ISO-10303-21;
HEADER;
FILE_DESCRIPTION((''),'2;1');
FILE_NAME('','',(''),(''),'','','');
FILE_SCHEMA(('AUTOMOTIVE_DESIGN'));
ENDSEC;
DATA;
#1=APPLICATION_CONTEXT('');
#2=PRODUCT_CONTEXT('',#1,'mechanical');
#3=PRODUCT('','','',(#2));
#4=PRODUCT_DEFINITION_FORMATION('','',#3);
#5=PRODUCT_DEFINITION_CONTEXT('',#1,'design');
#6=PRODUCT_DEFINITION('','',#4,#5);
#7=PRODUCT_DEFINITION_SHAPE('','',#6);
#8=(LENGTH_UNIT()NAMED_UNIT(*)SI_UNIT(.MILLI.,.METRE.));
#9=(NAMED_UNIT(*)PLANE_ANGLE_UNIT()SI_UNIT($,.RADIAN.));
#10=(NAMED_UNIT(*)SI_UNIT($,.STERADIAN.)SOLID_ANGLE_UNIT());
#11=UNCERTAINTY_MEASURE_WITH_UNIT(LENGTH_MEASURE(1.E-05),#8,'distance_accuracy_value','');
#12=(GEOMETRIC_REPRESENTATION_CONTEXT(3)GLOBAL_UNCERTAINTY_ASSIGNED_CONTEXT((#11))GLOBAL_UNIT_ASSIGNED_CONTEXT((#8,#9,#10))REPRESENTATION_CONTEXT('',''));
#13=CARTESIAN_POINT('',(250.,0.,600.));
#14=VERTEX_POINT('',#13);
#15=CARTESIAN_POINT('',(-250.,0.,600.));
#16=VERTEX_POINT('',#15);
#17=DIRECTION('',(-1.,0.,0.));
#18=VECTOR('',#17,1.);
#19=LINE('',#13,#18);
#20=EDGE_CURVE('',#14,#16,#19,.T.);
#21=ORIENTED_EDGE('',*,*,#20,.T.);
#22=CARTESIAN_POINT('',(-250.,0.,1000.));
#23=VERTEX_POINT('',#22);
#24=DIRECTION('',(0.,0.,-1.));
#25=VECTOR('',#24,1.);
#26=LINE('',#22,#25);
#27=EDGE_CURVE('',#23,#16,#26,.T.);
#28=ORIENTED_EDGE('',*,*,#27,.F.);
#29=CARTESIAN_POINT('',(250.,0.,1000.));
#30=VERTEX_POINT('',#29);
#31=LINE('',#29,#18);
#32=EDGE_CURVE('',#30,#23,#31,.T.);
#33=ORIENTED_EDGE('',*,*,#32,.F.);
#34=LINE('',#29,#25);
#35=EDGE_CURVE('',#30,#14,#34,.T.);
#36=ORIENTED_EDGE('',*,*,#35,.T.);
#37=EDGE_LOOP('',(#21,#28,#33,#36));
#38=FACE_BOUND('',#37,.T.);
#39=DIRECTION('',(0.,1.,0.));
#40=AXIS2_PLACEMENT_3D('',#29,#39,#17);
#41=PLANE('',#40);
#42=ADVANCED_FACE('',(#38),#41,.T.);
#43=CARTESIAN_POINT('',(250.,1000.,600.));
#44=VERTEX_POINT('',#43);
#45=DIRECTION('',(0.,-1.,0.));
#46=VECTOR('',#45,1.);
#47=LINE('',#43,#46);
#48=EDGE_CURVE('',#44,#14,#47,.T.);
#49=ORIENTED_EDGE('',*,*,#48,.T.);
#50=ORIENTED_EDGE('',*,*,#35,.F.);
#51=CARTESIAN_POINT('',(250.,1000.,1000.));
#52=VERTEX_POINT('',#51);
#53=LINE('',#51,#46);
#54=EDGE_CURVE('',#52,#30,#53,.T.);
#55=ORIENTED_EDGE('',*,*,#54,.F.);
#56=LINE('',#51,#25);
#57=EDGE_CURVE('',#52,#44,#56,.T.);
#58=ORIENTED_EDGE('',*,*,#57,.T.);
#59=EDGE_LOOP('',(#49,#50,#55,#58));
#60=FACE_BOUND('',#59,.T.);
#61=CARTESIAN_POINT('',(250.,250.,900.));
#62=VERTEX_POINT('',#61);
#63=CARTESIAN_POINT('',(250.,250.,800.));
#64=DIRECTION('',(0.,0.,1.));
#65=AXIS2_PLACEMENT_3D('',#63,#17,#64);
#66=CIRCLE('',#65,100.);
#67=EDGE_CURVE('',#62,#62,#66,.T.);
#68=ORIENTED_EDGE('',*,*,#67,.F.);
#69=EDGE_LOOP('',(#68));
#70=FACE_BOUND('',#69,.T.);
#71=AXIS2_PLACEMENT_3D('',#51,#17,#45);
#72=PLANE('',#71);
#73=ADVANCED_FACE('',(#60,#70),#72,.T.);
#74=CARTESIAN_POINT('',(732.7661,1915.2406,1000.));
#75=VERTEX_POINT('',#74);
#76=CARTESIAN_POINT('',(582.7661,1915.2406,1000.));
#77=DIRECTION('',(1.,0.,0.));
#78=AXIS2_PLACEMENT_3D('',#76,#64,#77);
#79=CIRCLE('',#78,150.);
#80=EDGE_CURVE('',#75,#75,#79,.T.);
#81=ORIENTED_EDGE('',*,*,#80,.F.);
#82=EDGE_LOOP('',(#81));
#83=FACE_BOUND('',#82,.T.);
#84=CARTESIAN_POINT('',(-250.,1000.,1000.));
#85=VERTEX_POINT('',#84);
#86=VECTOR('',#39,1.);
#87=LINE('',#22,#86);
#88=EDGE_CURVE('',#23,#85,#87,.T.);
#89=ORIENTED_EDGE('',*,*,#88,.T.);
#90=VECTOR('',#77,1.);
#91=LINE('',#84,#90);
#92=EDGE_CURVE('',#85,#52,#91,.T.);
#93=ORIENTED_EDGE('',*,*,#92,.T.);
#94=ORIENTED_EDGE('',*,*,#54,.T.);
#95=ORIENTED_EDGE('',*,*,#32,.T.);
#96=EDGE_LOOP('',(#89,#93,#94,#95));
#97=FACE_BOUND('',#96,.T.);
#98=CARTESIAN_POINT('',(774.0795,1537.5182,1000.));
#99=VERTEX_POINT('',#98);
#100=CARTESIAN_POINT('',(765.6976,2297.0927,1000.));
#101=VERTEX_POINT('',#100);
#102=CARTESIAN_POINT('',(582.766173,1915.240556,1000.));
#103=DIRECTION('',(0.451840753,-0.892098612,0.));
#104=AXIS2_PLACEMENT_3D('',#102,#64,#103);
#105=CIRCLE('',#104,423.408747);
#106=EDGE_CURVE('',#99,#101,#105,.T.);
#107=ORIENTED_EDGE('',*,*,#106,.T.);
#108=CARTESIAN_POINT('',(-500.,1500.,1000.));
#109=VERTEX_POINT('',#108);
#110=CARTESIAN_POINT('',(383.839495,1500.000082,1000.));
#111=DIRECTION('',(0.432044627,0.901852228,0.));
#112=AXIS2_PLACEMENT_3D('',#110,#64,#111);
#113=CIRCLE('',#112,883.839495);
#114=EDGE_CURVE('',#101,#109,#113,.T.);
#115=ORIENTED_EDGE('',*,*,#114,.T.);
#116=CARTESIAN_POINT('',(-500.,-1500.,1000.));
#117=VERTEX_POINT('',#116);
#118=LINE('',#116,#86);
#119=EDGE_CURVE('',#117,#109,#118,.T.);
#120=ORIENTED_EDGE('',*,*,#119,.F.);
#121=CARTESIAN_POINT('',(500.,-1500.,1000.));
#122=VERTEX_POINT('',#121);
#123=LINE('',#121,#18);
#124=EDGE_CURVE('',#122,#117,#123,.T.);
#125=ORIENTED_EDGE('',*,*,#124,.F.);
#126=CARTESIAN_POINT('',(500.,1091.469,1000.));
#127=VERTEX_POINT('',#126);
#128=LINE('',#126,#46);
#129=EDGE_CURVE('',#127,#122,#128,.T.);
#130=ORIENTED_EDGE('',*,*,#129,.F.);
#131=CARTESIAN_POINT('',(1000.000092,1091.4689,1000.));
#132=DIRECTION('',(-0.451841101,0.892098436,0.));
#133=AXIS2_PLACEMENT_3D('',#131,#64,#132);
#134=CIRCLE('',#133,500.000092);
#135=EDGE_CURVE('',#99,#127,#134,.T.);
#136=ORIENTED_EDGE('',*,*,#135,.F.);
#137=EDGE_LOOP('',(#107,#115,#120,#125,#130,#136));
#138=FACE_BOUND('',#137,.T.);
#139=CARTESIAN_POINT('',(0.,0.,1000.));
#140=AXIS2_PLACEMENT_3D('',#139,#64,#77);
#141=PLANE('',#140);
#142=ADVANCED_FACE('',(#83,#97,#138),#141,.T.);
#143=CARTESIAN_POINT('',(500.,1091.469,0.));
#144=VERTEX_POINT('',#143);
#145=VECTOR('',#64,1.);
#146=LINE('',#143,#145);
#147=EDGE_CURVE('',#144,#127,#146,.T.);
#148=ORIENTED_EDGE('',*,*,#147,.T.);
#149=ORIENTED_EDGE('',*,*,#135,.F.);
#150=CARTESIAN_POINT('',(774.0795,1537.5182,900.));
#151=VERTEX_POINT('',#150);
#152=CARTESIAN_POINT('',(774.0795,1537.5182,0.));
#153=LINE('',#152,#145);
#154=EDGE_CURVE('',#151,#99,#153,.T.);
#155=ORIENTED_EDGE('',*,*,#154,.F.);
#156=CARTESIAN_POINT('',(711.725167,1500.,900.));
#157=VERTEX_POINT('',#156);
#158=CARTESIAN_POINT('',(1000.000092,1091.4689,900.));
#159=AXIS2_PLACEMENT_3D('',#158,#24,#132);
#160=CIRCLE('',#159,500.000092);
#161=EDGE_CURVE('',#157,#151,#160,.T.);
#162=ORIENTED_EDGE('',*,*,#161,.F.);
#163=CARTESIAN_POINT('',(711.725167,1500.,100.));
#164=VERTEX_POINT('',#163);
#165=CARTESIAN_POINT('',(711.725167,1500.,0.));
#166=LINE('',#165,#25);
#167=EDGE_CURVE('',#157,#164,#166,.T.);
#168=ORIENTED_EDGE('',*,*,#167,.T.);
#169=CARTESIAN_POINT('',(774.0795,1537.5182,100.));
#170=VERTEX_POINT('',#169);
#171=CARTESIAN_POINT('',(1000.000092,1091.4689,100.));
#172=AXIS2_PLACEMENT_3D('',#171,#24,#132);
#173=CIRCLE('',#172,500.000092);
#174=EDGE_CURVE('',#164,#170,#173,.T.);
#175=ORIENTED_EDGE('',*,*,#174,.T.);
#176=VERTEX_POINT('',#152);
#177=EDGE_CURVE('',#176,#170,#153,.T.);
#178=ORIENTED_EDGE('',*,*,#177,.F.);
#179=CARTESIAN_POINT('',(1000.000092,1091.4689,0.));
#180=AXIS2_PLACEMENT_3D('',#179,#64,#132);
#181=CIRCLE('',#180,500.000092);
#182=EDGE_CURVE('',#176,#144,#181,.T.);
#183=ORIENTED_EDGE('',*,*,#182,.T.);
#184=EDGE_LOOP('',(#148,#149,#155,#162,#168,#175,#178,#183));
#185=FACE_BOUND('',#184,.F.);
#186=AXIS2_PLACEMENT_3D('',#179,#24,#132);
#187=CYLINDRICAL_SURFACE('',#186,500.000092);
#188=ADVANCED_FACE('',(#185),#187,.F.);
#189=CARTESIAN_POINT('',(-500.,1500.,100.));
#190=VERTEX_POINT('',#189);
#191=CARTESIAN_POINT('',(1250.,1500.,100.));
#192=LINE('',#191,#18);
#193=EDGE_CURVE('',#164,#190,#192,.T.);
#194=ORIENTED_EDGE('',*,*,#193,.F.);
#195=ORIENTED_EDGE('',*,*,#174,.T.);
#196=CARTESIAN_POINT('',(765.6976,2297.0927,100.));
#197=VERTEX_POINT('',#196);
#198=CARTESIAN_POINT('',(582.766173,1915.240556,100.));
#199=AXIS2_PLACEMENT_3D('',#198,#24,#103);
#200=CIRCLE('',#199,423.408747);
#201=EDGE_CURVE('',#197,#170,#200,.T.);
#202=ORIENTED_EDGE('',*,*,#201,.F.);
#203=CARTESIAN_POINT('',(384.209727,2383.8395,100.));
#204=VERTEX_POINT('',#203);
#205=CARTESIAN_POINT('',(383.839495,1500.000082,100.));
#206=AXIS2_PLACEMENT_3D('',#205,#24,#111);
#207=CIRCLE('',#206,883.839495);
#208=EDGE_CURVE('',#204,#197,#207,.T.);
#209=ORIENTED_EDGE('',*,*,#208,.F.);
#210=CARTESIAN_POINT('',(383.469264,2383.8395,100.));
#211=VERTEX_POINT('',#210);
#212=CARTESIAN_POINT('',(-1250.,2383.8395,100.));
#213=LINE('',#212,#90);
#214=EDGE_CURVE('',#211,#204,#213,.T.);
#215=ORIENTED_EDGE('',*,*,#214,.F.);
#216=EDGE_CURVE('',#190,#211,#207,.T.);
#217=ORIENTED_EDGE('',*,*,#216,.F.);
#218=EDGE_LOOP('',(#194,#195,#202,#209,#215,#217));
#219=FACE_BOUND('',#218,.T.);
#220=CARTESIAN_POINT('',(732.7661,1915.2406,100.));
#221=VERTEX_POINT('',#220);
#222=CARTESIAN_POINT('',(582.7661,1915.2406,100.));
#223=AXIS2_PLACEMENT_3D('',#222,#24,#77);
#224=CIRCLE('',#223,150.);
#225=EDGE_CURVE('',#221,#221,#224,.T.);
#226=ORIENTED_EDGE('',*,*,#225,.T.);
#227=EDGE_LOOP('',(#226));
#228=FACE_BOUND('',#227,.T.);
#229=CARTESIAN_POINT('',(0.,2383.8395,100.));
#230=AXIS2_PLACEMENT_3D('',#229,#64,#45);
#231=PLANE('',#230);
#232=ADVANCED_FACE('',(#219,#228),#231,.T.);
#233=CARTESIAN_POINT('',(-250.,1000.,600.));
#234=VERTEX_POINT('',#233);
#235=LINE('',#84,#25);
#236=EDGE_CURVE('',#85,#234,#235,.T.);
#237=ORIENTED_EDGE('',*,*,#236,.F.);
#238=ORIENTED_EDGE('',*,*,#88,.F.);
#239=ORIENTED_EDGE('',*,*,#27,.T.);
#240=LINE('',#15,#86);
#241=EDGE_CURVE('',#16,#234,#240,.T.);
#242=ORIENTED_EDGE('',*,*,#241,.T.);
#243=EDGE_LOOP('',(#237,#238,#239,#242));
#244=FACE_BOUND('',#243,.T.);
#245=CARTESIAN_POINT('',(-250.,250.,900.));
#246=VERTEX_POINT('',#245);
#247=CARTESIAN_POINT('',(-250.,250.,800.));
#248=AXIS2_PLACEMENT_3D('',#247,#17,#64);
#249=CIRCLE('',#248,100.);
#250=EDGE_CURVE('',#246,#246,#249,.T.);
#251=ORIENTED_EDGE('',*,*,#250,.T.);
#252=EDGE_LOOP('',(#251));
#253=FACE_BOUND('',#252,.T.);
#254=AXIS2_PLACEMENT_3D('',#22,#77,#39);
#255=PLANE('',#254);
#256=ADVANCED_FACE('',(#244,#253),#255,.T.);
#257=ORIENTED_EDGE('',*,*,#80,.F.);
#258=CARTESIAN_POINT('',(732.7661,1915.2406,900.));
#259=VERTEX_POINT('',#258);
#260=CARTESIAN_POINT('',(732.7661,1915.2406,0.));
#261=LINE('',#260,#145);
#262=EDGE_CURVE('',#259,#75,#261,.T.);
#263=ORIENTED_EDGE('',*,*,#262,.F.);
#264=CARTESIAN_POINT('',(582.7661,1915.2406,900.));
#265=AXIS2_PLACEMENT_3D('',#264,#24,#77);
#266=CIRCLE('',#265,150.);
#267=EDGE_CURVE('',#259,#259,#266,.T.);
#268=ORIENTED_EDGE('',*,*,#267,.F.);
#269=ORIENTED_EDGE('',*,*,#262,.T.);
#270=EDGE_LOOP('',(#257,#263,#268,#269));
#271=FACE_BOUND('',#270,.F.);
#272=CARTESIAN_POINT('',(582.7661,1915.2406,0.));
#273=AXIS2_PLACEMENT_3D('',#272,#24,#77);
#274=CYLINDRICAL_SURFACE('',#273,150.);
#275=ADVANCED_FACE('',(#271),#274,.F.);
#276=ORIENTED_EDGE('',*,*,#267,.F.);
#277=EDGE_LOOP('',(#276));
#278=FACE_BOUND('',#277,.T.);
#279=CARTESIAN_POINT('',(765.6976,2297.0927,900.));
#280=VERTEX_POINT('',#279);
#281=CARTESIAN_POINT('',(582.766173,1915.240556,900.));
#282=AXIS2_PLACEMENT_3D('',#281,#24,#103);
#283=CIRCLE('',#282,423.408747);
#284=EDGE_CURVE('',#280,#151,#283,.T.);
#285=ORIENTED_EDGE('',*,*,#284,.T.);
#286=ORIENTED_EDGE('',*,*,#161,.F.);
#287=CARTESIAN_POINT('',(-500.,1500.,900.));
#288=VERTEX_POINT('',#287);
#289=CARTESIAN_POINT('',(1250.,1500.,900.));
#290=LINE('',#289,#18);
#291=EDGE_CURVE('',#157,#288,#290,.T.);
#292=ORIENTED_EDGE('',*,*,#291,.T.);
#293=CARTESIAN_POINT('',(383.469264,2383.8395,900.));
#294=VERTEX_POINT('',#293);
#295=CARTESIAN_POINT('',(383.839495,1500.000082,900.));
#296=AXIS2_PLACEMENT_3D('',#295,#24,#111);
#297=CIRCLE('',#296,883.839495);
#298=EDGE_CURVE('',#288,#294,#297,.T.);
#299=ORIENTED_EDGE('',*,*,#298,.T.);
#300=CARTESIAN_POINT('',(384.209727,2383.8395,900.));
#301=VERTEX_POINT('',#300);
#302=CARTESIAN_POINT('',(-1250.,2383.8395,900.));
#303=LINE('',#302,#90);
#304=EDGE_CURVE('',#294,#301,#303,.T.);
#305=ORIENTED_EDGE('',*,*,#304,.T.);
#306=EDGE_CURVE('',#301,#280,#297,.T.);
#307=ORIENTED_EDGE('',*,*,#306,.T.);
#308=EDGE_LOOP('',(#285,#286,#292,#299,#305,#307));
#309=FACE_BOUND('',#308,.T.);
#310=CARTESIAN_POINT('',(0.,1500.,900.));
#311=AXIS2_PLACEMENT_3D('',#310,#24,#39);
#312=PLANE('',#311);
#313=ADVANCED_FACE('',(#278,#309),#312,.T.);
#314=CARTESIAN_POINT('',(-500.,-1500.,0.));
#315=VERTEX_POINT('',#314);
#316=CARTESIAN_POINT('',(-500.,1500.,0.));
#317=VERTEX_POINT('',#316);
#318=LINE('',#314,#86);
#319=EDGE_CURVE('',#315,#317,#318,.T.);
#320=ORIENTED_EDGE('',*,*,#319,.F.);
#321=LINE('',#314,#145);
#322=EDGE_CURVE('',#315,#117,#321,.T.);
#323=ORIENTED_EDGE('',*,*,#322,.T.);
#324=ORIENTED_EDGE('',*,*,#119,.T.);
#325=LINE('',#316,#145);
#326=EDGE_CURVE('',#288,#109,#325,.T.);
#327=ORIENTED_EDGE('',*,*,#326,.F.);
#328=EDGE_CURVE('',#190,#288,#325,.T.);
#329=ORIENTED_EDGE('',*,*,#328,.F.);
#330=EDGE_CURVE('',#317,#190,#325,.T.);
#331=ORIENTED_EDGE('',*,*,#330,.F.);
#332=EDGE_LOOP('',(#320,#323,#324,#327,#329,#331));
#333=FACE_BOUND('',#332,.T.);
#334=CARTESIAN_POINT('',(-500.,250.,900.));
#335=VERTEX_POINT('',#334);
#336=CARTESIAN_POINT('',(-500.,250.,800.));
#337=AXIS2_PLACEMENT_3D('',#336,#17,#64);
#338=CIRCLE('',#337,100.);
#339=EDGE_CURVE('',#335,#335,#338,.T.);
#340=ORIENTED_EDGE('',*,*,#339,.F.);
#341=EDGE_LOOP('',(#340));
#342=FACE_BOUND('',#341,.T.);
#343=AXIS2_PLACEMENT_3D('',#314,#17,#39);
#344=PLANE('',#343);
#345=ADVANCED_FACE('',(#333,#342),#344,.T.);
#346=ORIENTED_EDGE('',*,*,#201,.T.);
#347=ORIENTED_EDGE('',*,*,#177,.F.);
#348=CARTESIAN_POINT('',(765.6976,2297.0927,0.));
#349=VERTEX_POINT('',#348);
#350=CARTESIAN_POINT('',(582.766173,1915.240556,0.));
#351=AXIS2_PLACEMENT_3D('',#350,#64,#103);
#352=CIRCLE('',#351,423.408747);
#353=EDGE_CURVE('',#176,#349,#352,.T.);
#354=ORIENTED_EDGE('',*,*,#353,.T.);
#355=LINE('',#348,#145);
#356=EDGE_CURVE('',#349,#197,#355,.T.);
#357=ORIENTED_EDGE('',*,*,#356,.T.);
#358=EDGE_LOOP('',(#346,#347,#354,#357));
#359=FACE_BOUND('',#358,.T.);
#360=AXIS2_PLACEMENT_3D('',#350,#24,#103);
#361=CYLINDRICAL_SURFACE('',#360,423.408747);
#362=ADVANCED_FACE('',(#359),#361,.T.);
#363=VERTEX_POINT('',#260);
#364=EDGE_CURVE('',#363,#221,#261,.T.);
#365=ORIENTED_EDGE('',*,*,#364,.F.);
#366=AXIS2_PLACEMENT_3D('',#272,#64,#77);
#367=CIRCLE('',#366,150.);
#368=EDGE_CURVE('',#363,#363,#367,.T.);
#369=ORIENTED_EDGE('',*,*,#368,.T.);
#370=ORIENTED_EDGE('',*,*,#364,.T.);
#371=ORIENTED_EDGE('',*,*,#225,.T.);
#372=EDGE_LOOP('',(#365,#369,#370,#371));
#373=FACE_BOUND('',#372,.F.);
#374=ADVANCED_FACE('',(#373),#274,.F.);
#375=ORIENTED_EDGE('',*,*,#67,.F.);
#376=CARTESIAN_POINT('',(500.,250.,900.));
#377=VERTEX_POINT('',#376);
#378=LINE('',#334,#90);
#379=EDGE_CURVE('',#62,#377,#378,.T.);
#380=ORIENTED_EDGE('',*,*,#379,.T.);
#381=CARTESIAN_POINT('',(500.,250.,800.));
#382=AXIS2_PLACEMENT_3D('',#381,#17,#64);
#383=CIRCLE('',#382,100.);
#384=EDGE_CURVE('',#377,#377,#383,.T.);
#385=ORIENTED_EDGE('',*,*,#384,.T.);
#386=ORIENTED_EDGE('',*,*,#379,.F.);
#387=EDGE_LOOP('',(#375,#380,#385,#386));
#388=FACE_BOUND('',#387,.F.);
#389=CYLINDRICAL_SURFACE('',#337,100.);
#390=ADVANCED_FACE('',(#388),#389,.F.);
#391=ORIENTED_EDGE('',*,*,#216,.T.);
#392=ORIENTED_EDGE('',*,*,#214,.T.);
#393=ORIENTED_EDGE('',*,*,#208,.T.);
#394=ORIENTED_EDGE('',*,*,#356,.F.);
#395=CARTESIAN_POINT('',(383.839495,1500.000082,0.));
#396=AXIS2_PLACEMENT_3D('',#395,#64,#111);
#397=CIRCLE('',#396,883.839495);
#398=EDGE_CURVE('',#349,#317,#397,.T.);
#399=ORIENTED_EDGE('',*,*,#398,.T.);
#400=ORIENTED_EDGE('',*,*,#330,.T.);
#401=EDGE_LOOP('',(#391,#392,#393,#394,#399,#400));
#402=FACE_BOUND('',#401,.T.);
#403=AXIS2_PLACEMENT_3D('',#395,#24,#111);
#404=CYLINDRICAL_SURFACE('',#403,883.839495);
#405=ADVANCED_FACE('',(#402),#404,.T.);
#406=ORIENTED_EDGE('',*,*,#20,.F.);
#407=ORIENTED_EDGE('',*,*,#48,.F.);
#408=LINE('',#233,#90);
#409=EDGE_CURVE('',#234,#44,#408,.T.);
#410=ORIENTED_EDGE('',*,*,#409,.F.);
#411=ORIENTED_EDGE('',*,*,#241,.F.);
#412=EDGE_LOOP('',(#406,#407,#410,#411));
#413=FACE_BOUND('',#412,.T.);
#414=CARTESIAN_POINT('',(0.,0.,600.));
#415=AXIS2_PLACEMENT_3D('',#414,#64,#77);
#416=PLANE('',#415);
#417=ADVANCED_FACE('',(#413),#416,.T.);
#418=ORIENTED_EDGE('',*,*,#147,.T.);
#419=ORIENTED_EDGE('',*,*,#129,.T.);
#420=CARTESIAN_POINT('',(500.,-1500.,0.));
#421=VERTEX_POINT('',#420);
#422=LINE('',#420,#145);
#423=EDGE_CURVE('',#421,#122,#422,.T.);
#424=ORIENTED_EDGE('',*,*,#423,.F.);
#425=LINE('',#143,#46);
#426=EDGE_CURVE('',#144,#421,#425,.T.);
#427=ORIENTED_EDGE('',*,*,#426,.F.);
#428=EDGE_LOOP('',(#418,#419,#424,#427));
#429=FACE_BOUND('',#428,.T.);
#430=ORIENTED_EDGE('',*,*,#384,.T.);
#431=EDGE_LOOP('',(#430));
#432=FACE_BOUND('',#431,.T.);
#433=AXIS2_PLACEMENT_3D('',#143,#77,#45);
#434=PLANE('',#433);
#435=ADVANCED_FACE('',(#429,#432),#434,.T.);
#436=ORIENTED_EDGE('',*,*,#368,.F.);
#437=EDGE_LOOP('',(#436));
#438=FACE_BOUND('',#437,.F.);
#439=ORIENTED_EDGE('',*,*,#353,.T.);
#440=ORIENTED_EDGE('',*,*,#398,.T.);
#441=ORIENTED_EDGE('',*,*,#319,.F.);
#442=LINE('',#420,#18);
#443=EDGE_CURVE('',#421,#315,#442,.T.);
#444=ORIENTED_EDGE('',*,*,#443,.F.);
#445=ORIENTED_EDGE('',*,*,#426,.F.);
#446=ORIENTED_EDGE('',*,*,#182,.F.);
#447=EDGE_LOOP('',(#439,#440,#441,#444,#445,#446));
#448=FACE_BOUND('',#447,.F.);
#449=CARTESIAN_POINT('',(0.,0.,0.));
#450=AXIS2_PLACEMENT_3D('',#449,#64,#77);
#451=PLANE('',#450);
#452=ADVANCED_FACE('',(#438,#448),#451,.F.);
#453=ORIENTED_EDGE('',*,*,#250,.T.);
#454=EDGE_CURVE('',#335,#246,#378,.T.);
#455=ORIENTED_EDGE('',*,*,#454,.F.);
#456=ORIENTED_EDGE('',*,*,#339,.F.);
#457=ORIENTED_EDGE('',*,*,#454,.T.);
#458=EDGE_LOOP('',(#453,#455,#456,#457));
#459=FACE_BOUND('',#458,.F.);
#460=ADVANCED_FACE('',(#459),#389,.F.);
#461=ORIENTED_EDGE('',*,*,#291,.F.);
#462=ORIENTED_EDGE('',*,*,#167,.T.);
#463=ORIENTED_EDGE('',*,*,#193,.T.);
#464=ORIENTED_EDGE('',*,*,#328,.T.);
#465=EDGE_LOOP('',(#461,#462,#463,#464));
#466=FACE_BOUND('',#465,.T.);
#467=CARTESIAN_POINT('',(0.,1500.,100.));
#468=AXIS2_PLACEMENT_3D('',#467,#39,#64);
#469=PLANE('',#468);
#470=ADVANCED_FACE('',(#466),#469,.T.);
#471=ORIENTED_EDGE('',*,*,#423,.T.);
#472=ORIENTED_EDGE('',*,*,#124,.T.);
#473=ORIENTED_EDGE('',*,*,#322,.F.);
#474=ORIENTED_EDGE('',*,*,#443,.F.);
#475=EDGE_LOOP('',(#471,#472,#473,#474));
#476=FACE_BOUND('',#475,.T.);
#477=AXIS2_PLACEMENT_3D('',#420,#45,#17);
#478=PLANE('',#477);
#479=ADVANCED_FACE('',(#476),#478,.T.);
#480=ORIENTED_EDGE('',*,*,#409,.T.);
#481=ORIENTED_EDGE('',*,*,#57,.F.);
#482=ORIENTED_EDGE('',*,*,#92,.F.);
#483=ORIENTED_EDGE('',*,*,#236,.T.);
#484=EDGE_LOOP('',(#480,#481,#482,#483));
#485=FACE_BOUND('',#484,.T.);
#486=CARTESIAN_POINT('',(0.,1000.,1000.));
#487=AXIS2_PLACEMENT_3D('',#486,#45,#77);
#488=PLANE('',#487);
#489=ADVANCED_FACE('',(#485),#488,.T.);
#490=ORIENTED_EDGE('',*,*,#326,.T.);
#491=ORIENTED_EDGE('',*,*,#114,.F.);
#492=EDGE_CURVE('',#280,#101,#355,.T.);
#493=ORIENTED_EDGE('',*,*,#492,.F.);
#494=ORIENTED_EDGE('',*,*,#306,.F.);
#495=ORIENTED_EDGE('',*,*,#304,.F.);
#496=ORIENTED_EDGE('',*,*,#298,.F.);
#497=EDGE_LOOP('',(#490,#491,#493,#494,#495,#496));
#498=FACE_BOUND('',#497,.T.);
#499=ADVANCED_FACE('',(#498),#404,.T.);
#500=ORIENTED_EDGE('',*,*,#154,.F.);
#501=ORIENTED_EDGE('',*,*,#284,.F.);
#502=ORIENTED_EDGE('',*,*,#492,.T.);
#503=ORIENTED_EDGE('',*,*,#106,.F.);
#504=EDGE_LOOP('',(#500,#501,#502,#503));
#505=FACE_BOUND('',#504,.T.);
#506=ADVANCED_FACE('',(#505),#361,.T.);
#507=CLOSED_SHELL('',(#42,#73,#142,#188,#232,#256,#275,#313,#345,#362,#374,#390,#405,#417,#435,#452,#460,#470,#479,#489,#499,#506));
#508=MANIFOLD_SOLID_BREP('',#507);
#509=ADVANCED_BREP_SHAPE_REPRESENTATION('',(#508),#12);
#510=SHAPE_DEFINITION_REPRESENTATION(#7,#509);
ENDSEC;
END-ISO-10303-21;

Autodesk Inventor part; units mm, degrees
ref_plane "YZ Plane" through (0, 0, 0) normal (1, 0, 0) x (0, 1, 0)
ref_plane "XZ Plane" through (0, 0, 0) normal (0, 1, 0) x (-1, 0, 0)
sketch "Skizze1" plane through (0, 0, 0) normal (0, 0, 1) x (1, 0, 0)
  line L0 (-1066.0722, 0) -> (1356.4088, 0) construction
  line L1 (0, -2329.2869) -> (0, 3475.7215) construction
  line L2 (500, 1091.469) -> (500, -1500)
  line L3 (500, -1500) -> (-500, -1500)
  line L4 (-500, -1500) -> (-500, 1500)
  line L5 (-500, 1500) -> (500, -1500) construction
  line L6 (500, 1500) -> (-500, -1500) construction
  arc A0 (765.6976, 2297.0927) -> (-500, 1500) centre (383.8395, 1500) ccw
  arc A1 (774.0795, 1537.5182) -> (765.6976, 2297.0927) centre (582.7661, 1915.2406) ccw
  circle A2 centre (582.7661, 1915.2406) radius 150
  arc A3 (774.0795, 1537.5182) -> (500, 1091.469) centre (1000, 1091.469) ccw
  point P0 (0, 0)
  dimension "d0" = 1000
  dimension "d1" = 3000
  dimension "d2" = 423.4087
  dimension "d3" = 300
  dimension "d5" = 500
extrude "Extrusion1" add sketch "Skizze1" along normal blind 1000
ref_plane "Arbeitsebene1" through (0, -1500, 0) normal (-1, 0, 0) x (0, 0, 1)
sketch "Skizze2" plane through (0, -1500, 0) normal (-1, 0, 0) x (0, 0, 1)
  line L0 (0, 3000) -> (1000, 3000) projected
  line L1 (100, 3000) -> (908.6027, 3000)
  line L2 (0, 3883.8395) -> (1000, 3883.8395) construction
  line L3 (100, 3000) -> (900, 3000)
  line L4 (900, 3000) -> (900, 3883.8395)
  line L5 (900, 3883.8395) -> (100, 3883.8395)
  line L6 (100, 3883.8395) -> (100, 3000)
  line L7 (1000, 3000) -> (1000, 3883.8395) construction
  point P0 (0, 1500)
  point P1 (1000, 3797.0927)
  dimension "d8" = 800
  dimension "d9" = 100
extrude "Extrusion2" cut sketch "Skizze2" along normal mid plane 2500
sketch "Skizze3" plane through (0, 0, 1000) normal (0, 0, 1) x (1, 0, 0)
  point P0 (0, 0)
sketch "Skizze4" plane through (0, 0, 1000) normal (0, 0, 1) x (1, 0, 0)
  point P0 (0, 0)
sketch "Skizze5" plane through (0, 0, 1000) normal (0, 0, 1) x (1, 0, 0)
  line L0 (-500, 1500) -> (-500, -1500) construction
  line L1 (0, 0) -> (-250, 0)
  line L2 (-250, 0) -> (-250, 1000)
  line L3 (-250, 1000) -> (0, 1000)
  line L4 (0, 1000) -> (250, 1000)
  line L5 (250, 1000) -> (250, 0)
  line L6 (250, 0) -> (0, 0)
  line L7 (-250, 1000) -> (250, 1000)
  line L8 (250, 1000) -> (250, 0)
  line L9 (250, 0) -> (-250, 0)
  line L10 (-250, 0) -> (-250, 1000)
  dimension "d13" = 250
  dimension "d14" = 1000
  dimension "d15" = 250
extrude "Extrusion3" cut sketch "Skizze5" against normal blind 400
sketch "Skizze6" plane through (-500, -1500, 0) normal (-1, 0, 0) x (0, 0, 1)
  point P0 (0, 1500)
sketch "Skizze7" plane through (-500, -1500, 0) normal (-1, 0, 0) x (0, 0, 1)
  point P0 (0, 1500)
sketch "Skizze8" plane through (-500, -1500, 0) normal (0, -1, 0) x (1, 0, 0)
  point P0 (500, 0)
sketch "Skizze9" plane through (-500, -1500, 0) normal (-1, 0, 0) x (0, 0, 1)
  line L0 (1000, 0) -> (800, 0)
  circle A0 centre (800, 1750) radius 100
  point P0 (0, 1500)
extrude "Extrusion4" cut sketch "Skizze9" against normal through all
sketch "Skizze10" plane through (0, 0, 1000) normal (0, 0, 1) x (1, 0, 0)
  point P0 (0, 0)
properties part number "Unterstützen"
